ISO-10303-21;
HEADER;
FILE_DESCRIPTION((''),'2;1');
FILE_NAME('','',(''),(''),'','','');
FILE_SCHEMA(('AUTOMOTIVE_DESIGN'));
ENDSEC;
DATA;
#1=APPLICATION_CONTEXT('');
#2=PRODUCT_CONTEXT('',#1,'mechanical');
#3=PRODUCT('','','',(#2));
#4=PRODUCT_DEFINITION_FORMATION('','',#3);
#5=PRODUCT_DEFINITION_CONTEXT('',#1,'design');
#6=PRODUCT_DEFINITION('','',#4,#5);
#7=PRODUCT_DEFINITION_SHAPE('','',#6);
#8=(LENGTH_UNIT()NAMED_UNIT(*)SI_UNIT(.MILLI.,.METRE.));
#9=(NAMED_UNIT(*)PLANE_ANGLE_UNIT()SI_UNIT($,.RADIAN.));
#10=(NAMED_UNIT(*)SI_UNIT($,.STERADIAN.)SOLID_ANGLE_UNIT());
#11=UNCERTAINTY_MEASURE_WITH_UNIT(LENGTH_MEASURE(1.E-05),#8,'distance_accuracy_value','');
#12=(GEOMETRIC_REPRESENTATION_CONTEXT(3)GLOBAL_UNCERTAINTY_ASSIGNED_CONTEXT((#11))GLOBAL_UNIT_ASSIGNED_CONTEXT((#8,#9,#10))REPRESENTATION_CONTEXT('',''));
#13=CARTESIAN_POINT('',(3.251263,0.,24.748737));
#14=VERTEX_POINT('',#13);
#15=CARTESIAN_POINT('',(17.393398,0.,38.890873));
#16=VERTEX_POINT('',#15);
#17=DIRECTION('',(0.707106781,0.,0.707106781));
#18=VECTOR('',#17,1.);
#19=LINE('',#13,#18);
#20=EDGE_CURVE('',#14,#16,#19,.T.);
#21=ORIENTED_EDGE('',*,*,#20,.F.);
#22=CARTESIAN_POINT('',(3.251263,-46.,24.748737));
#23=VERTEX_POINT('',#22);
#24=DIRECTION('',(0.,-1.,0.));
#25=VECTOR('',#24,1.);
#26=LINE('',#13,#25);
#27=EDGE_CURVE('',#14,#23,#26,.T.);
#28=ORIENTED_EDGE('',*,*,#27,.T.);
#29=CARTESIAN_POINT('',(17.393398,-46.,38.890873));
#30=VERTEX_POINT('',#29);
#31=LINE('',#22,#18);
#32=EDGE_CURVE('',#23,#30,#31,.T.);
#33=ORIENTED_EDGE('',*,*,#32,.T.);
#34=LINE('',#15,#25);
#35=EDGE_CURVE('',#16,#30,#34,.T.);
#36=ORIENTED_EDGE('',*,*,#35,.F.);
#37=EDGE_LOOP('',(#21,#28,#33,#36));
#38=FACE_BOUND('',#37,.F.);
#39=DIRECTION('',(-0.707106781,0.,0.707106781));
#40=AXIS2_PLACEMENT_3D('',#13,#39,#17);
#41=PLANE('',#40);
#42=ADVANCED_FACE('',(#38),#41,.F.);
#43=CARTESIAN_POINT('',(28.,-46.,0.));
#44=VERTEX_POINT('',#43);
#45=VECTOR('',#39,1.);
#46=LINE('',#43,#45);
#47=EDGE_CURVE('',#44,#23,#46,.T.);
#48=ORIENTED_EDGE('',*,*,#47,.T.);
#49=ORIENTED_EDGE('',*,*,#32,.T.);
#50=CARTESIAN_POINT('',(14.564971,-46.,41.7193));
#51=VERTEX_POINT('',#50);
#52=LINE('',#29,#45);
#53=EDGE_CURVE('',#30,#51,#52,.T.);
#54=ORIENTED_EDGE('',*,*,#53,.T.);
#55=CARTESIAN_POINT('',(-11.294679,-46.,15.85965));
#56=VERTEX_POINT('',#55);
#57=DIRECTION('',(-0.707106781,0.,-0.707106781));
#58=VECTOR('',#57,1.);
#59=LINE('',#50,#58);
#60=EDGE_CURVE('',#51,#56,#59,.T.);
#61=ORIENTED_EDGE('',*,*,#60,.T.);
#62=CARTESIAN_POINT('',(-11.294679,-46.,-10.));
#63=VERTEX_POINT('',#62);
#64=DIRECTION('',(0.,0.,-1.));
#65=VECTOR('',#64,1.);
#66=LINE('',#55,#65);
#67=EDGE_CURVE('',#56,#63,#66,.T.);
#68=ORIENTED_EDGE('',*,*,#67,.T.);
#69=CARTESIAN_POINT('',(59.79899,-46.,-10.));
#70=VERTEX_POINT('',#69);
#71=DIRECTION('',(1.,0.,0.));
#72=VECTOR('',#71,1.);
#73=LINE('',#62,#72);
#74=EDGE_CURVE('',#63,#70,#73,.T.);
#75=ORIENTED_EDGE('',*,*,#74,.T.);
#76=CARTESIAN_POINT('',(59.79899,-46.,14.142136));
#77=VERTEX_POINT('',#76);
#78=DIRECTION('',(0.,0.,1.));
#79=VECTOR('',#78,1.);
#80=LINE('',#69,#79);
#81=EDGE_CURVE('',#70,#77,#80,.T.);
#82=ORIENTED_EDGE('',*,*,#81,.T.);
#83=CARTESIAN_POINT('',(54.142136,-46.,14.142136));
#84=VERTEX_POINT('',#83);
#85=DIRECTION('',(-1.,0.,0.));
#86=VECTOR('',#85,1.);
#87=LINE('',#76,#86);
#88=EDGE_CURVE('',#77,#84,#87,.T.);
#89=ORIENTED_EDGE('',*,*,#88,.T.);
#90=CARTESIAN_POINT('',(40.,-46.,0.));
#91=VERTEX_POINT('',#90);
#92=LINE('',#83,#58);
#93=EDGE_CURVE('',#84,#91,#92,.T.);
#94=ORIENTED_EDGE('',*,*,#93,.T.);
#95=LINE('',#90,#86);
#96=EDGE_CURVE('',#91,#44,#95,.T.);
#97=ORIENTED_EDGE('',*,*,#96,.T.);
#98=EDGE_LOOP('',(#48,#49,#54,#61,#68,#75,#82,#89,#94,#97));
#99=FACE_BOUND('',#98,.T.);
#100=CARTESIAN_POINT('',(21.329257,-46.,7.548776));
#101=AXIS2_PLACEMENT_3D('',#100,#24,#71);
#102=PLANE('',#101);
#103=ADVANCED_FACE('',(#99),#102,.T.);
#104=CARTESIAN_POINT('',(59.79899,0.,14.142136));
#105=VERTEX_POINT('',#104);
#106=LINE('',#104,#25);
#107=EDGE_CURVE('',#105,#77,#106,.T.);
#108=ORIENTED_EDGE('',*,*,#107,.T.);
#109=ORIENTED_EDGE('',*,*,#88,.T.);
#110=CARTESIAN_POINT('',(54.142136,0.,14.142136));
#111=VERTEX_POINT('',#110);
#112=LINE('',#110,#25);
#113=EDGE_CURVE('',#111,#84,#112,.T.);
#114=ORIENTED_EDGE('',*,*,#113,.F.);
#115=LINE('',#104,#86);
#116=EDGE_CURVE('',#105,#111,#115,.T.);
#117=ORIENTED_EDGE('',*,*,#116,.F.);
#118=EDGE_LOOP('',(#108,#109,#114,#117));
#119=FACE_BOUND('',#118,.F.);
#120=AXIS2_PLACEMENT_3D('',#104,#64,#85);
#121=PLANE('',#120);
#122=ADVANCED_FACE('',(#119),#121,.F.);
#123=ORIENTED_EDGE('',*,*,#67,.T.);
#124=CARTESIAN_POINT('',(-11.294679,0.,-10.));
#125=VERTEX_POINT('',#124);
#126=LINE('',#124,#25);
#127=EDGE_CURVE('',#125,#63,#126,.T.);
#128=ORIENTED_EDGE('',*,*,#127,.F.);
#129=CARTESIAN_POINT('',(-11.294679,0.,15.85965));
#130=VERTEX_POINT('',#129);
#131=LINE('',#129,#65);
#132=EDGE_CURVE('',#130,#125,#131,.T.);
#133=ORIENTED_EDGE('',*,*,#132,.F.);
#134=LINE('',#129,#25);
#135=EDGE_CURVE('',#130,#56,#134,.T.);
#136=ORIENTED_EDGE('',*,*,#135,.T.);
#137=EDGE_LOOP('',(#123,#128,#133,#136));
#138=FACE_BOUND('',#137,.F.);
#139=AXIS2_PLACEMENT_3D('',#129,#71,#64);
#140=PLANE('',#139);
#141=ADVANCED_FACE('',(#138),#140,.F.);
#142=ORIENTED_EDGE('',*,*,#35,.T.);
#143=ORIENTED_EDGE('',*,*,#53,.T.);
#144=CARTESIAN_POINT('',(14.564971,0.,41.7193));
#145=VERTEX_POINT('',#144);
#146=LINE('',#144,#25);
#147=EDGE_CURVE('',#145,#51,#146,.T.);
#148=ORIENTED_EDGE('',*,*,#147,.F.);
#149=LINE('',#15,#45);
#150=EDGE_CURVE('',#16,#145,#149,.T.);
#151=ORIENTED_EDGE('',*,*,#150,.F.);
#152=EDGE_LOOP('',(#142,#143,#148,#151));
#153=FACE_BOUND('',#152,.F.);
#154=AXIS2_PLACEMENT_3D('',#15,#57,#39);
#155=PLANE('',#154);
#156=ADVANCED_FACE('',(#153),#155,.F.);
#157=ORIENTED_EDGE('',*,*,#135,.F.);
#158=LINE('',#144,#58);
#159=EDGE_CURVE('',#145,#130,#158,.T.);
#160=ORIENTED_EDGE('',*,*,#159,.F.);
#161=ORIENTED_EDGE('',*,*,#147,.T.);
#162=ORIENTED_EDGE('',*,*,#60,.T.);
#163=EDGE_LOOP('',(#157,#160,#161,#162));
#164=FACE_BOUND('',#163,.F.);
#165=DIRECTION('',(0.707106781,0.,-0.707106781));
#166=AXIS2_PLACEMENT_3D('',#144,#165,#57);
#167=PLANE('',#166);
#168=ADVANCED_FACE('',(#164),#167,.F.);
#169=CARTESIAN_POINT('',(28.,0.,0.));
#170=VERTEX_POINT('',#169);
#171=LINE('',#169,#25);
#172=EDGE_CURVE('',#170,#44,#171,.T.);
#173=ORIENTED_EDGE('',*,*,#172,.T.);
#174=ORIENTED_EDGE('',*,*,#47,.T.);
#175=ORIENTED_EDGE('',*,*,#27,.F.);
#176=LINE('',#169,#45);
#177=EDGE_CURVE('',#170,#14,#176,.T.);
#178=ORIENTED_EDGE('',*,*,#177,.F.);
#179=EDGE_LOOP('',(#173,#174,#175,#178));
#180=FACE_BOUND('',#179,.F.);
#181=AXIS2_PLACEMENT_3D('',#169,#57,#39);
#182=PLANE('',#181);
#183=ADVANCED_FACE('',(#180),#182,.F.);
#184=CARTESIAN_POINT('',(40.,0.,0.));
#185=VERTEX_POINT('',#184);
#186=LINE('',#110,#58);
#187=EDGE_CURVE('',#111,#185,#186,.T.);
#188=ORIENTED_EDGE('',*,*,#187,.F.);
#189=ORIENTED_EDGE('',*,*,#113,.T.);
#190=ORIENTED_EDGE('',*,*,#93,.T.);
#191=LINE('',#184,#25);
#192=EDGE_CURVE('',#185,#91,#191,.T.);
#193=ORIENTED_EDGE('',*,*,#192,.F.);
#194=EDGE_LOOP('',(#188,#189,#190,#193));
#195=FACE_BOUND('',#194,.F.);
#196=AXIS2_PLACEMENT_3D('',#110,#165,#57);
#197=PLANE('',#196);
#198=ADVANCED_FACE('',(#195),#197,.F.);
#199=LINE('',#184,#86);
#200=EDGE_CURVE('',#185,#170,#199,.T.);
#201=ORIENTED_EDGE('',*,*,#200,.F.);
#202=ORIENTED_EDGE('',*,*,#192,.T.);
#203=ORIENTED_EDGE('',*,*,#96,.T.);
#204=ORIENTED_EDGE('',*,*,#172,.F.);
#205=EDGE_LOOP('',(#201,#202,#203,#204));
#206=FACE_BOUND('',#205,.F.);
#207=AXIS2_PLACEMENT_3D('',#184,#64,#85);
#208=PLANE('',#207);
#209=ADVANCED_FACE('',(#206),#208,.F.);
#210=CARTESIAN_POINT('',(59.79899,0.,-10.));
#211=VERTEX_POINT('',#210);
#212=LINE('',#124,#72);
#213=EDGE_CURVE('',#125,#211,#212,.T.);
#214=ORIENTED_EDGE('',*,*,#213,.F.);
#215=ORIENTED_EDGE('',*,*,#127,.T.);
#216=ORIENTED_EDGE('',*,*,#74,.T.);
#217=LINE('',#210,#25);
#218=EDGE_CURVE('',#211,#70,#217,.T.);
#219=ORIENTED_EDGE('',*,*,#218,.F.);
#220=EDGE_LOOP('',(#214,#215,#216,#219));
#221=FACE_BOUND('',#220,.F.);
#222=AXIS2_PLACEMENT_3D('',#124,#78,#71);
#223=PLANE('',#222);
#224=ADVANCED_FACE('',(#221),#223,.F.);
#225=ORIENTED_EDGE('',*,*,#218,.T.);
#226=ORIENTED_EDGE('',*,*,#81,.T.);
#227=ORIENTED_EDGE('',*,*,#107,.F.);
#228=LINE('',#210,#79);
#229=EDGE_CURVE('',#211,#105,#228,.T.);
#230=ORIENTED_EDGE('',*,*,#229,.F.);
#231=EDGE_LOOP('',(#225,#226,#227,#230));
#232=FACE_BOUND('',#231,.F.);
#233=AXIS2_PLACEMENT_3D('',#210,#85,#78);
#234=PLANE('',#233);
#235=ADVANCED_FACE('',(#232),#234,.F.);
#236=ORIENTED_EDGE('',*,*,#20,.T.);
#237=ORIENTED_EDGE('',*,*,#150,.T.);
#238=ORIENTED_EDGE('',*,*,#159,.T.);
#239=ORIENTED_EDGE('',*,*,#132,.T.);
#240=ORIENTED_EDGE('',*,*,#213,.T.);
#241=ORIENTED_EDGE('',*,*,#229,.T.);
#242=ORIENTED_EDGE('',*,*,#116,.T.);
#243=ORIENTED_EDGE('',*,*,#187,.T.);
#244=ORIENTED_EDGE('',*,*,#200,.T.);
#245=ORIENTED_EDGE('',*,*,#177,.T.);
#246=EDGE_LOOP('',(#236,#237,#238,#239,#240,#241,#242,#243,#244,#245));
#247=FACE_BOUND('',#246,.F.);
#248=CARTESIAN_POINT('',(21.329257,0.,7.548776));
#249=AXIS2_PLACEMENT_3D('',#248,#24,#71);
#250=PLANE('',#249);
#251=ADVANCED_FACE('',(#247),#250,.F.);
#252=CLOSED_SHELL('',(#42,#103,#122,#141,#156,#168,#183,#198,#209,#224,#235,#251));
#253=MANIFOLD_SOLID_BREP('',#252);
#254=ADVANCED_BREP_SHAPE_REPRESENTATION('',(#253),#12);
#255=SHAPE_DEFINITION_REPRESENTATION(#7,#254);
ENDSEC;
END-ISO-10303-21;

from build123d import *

# Parameters (mm, degrees)
F1_DEPTH = 46


# Not quite as in the source:
# - a feature names something its author has since deleted; it is built from what else it names


with BuildPart() as f1:
    # F0 (on Front) → F1 (new body)
    with BuildSketch(Plane.XZ):
        Polygon((54.1421356237, 14.1421356237), (40, 0), (28, 0), (3.2512626585, 24.7487373415), (17.3933982822, 38.8908729653), (14.5649711575, 41.71930009), (-11.2946788875, 15.859650045), (-11.2946788875, -10), (59.7989898732, -10), (59.7989898732, 14.1421356237), align=None)
    extrude(amount=F1_DEPTH)


solid = f1.part
